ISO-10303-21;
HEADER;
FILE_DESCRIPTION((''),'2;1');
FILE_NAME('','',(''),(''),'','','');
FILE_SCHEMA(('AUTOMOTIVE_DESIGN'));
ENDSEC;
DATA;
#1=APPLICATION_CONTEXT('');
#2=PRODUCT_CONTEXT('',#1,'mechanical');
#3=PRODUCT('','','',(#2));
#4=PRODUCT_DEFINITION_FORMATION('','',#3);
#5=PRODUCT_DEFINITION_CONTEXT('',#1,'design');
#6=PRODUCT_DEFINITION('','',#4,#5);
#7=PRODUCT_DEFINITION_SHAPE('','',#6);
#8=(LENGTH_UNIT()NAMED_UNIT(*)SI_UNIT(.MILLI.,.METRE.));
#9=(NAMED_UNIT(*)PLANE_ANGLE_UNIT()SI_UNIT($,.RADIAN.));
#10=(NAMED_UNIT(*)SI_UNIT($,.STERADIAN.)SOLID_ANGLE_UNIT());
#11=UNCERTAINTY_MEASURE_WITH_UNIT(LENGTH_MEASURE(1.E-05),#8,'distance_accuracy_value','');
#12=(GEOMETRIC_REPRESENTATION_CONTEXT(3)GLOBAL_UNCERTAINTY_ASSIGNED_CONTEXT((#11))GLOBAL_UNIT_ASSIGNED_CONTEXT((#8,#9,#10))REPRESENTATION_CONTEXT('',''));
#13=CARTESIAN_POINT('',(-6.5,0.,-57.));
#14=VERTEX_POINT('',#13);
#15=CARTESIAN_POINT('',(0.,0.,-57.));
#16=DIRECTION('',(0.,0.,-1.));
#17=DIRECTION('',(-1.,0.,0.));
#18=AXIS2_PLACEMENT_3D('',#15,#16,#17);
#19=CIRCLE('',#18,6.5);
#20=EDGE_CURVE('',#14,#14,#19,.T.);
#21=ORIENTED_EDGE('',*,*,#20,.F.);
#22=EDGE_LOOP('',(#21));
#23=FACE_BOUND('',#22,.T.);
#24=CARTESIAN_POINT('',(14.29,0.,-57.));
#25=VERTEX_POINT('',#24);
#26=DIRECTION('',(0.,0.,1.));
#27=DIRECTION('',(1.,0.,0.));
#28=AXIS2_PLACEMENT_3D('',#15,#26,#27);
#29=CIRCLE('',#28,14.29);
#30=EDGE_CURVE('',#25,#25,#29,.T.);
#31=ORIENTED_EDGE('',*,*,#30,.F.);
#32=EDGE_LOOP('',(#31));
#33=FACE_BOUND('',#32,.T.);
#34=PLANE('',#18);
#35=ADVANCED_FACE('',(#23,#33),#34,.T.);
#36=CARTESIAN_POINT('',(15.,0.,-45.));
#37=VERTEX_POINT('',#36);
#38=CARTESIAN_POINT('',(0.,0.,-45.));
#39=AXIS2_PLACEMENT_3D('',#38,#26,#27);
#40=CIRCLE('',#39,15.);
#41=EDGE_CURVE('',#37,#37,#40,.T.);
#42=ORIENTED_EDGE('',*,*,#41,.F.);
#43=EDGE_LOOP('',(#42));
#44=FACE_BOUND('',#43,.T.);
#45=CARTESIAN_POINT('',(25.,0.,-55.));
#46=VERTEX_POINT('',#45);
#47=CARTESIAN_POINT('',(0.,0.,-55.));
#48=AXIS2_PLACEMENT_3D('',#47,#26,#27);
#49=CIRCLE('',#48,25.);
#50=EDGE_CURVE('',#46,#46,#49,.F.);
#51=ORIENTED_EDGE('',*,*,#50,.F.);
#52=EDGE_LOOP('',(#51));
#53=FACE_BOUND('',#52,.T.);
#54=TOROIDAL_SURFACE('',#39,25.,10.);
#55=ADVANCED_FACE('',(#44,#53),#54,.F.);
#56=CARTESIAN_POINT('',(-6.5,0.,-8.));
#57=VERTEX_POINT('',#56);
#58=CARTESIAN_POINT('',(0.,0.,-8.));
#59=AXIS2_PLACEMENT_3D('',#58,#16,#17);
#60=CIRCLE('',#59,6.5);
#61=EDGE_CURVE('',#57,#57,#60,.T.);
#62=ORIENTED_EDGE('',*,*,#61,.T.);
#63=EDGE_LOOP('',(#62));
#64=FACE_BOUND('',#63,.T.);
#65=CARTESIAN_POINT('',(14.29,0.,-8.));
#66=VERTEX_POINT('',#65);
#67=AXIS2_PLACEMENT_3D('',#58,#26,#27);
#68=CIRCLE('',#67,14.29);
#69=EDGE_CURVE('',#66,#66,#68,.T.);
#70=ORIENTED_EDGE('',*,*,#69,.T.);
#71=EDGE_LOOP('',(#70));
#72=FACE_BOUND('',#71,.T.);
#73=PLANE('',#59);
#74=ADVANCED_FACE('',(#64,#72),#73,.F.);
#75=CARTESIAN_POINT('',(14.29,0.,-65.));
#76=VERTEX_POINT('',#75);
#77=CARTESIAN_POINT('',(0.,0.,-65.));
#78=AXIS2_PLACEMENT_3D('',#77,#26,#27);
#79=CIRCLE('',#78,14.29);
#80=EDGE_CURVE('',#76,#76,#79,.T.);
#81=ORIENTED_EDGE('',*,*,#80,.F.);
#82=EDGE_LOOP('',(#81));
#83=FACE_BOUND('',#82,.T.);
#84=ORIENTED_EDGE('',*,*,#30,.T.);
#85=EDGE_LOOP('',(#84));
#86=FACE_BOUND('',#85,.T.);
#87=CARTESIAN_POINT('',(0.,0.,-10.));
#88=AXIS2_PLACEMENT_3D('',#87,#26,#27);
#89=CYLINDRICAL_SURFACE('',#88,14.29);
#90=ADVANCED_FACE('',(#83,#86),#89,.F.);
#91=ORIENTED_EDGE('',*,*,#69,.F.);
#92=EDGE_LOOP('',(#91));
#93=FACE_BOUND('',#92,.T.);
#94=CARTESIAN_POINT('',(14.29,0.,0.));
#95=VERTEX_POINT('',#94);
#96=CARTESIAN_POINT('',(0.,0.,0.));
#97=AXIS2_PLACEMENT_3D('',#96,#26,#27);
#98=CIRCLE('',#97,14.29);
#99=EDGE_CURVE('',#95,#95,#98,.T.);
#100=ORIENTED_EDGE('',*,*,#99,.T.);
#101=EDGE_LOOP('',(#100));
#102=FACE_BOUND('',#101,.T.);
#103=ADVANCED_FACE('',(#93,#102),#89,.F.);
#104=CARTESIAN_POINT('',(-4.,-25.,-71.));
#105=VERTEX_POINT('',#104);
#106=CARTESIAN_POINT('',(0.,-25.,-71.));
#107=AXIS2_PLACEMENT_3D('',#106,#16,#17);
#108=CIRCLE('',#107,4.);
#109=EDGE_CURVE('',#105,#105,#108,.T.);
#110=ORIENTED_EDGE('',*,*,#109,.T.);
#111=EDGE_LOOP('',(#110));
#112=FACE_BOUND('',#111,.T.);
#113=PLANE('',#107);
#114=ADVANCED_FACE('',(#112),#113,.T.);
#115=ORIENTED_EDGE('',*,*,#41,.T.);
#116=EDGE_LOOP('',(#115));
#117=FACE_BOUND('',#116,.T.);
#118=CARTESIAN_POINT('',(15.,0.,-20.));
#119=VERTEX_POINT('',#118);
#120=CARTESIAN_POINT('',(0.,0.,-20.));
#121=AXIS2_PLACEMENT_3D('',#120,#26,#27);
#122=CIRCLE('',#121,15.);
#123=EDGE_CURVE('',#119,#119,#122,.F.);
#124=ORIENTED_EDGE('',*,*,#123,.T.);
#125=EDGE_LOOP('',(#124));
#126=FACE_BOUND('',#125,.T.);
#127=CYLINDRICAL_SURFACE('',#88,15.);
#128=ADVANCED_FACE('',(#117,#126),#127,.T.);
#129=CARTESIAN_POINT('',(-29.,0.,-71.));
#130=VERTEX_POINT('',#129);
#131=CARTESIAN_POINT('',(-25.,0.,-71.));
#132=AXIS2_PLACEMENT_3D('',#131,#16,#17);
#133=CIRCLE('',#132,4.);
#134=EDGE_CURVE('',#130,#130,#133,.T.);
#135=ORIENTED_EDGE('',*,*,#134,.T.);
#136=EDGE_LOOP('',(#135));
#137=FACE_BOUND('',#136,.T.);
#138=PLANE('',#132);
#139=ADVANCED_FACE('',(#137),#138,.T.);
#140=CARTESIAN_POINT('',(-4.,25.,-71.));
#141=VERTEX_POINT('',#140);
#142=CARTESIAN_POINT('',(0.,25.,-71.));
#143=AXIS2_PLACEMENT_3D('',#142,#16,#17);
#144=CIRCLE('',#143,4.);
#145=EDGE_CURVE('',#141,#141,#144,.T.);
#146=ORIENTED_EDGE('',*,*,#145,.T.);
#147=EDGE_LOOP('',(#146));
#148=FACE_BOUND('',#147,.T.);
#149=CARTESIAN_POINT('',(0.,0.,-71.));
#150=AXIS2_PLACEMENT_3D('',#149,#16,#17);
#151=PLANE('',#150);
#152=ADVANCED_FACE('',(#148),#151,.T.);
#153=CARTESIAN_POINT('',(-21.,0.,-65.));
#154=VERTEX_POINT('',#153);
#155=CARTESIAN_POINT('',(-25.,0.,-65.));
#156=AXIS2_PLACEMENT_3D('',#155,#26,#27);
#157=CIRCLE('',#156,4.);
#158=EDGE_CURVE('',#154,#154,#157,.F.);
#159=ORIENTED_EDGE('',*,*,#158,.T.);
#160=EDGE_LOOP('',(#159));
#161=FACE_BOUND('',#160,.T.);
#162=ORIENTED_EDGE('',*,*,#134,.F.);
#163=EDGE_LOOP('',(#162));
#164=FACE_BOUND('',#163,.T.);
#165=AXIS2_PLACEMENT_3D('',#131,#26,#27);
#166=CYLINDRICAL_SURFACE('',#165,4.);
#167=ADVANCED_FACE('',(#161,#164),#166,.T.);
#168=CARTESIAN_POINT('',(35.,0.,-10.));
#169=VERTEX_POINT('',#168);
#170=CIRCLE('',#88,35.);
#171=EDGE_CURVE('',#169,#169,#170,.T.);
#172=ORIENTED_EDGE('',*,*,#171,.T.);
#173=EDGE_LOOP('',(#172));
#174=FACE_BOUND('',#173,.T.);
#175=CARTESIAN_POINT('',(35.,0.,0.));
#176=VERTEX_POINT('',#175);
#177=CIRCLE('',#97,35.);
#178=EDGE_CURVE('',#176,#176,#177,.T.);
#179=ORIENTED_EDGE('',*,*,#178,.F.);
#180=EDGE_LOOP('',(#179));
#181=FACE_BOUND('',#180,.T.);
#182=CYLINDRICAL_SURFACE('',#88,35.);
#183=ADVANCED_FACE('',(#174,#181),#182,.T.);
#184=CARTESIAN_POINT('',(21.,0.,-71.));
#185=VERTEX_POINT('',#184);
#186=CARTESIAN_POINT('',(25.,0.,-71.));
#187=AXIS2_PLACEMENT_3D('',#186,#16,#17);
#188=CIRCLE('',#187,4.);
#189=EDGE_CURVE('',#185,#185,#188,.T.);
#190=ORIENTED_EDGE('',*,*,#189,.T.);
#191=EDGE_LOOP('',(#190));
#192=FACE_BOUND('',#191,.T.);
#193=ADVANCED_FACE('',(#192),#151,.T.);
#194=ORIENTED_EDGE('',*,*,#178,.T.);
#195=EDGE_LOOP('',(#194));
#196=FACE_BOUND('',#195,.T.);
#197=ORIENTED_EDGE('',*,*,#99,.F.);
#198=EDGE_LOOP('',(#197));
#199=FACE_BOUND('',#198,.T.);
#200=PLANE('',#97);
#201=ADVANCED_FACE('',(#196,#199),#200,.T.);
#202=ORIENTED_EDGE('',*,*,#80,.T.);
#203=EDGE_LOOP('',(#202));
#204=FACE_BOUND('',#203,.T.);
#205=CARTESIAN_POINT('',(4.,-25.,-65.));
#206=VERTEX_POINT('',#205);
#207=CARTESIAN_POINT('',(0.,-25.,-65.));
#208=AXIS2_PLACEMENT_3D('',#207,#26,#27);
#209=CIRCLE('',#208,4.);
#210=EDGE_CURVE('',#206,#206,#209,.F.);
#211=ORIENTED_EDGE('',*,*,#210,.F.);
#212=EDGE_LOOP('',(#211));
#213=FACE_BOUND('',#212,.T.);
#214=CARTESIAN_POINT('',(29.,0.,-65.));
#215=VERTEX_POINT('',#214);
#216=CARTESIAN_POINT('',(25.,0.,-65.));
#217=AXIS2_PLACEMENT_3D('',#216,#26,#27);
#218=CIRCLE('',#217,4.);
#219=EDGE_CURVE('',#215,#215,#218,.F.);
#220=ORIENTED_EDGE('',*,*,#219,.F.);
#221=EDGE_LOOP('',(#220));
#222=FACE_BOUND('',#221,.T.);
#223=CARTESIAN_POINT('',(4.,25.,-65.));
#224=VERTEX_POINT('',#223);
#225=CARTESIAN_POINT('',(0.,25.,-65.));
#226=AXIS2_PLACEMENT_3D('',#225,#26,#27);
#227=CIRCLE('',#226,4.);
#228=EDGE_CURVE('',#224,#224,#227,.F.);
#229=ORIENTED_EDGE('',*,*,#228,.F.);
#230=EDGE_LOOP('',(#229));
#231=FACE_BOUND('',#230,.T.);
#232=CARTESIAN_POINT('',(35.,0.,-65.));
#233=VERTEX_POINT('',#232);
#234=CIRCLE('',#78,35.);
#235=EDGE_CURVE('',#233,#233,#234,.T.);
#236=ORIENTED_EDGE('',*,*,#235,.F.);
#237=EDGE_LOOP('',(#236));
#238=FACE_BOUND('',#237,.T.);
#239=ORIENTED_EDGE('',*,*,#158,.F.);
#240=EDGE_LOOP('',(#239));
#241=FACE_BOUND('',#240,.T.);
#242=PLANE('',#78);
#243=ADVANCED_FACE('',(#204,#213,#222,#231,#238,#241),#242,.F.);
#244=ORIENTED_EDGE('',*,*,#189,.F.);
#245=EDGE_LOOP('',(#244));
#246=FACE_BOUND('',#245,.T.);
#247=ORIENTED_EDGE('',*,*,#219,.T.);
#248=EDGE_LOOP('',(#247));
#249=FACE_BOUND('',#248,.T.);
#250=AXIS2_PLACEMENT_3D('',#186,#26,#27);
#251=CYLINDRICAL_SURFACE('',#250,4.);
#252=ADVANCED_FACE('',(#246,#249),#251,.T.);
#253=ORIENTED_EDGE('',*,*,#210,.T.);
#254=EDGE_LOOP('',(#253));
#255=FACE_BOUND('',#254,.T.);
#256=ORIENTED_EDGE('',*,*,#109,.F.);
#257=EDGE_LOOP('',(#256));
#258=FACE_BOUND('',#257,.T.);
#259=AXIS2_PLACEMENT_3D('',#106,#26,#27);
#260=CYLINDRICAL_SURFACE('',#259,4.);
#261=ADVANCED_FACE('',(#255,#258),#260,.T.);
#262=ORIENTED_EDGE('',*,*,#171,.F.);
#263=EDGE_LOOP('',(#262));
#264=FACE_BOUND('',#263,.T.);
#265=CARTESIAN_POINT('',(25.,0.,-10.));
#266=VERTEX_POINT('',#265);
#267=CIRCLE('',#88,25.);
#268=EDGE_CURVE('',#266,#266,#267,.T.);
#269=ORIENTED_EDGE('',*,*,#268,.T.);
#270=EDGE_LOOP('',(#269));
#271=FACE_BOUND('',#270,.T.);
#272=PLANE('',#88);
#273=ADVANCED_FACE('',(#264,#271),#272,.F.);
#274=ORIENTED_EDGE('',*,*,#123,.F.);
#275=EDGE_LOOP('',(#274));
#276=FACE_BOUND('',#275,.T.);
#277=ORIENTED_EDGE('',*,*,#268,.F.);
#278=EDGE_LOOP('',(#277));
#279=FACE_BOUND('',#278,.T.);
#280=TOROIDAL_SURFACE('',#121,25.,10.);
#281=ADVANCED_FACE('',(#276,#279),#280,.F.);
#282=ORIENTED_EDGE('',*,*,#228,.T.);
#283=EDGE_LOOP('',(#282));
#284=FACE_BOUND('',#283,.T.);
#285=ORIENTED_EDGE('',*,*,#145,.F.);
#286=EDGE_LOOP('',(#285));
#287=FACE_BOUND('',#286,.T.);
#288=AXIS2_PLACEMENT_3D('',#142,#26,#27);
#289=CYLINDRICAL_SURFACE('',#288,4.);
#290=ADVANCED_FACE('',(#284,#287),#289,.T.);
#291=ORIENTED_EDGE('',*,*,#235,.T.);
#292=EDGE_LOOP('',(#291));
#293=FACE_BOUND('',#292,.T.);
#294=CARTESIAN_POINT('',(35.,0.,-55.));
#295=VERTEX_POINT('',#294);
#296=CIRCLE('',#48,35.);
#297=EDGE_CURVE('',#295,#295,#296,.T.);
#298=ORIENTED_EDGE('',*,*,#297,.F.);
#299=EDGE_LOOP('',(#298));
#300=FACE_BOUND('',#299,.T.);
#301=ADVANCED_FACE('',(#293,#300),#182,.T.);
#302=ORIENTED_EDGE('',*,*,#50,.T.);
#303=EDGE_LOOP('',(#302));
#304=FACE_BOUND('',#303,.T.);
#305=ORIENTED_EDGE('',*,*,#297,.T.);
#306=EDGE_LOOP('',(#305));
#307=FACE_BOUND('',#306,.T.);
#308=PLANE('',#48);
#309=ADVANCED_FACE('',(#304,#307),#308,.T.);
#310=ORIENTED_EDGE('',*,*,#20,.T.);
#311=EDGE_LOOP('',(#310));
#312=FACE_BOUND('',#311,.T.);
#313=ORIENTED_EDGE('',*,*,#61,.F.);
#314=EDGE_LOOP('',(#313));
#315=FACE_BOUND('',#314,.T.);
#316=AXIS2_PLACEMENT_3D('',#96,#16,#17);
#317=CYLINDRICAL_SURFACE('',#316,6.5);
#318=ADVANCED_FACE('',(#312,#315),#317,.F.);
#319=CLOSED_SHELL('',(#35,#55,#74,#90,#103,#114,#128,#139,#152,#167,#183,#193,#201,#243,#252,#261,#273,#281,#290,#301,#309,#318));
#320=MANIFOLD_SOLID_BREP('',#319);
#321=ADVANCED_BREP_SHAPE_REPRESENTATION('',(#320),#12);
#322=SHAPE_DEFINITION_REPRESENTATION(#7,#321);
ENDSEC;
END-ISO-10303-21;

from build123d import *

# Parameters (mm, degrees)
ESQUISSE28_R             = 6.5
ENL_V_MAT_EXTRU_16_DEPTH = 76.4917214
CONG_1_R                 = 10
ESQUISSE29_R             = 4
BOSS_EXTRU_1_DEPTH       = 6
ESQUISSE30_R             = 19.501187477
ESQUISSE30_R_2           = 15
BOSS_EXTRU_2_DEPTH       = 9.735855
CONG_2_R                 = 10


with BuildPart() as part:
    # Esquisse27 → Révolution1 (revolve)
    with BuildSketch(Plane(origin=(0, 0, 0), x_dir=(0, 0, -1), z_dir=(1, 0, 0)), mode=Mode.PRIVATE) as r_volution1_sk:
        Polygon((8, 14.29), (8, 0), (57, 0), (57, 14.29), (65, 14.29), (65, 35), (55, 35), (55, 19.501187477), (64.735853824, 19.501187477), (64.735853824, 15), (10, 15), (10, 35), (0, 35), (0, 14.29), align=None)
    revolve(r_volution1_sk.sketch.rotate(Axis((0, 0, -10), (0, 0, -1)), 90), axis=Axis((0, 0, -10), (0, 0, -1)))

    # Esquisse28 → Enlèv. mat.-Extru.16 (cut, through all)
    with BuildSketch(Plane(origin=(0, 0, -57), x_dir=(-1, 0, 0), z_dir=(0, 0, -1))):
        Circle(ESQUISSE28_R)
    extrude(amount=-ENL_V_MAT_EXTRU_16_DEPTH, mode=Mode.SUBTRACT)

    # Congé1
    cong_1_edges = [part.edges().sort_by_distance(p)[0] for p in [
        (-15, 0, -10),
    ]]
    fillet(cong_1_edges, radius=CONG_1_R)

    # Esquisse29 → Boss.-Extru.1 (add)
    with BuildSketch(Plane(origin=(0, 0, -65), x_dir=(-1, 0, 0), z_dir=(0, 0, -1))):
        with Locations(Location((0, 25, 0), (0, 0, 180))):
            Circle(ESQUISSE29_R)
        with Locations(Location((25, 0, 0), (0, 0, 180))):
            Circle(ESQUISSE29_R)
        with Locations(Location((0, -25, 0), (0, 0, 180))):
            Circle(ESQUISSE29_R)
        with Locations(Location((-25, 0, 0), (0, 0, 180))):
            Circle(ESQUISSE29_R)
    extrude(amount=BOSS_EXTRU_1_DEPTH)

    # Esquisse30 → Boss.-Extru.2 (add)
    with BuildSketch(Plane.XY.offset(-64.735853824)):
        Circle(ESQUISSE30_R)
        Circle(ESQUISSE30_R_2, mode=Mode.SUBTRACT)
    extrude(amount=BOSS_EXTRU_2_DEPTH)

    # Congé2
    # the kernel refuses this fillet: 10 mm, written as the material it adds along each edge
    with BuildSketch(Plane(origin=(0, 0, -54.999998824), x_dir=(1, 0, 0), z_dir=(0, -1, 0))) as cong_2_piece_1:
        with BuildLine():
            CenterArc((15 + CONG_2_R, CONG_2_R), CONG_2_R, 180, 90)
            Line((15 + CONG_2_R, 0), (15 + CONG_2_R, -CONG_2_R * 0.02))
            Line((15 + CONG_2_R, -CONG_2_R * 0.02), (15 - CONG_2_R * 0.02, -CONG_2_R * 0.02))
            Line((15 - CONG_2_R * 0.02, -CONG_2_R * 0.02), (15 - CONG_2_R * 0.02, CONG_2_R))
            Line((15 - CONG_2_R * 0.02, CONG_2_R), (15, CONG_2_R))
        make_face()
    revolve(axis=Axis((0, 0, -54.999998824), (0, 0, 1)))


solid = part.part
